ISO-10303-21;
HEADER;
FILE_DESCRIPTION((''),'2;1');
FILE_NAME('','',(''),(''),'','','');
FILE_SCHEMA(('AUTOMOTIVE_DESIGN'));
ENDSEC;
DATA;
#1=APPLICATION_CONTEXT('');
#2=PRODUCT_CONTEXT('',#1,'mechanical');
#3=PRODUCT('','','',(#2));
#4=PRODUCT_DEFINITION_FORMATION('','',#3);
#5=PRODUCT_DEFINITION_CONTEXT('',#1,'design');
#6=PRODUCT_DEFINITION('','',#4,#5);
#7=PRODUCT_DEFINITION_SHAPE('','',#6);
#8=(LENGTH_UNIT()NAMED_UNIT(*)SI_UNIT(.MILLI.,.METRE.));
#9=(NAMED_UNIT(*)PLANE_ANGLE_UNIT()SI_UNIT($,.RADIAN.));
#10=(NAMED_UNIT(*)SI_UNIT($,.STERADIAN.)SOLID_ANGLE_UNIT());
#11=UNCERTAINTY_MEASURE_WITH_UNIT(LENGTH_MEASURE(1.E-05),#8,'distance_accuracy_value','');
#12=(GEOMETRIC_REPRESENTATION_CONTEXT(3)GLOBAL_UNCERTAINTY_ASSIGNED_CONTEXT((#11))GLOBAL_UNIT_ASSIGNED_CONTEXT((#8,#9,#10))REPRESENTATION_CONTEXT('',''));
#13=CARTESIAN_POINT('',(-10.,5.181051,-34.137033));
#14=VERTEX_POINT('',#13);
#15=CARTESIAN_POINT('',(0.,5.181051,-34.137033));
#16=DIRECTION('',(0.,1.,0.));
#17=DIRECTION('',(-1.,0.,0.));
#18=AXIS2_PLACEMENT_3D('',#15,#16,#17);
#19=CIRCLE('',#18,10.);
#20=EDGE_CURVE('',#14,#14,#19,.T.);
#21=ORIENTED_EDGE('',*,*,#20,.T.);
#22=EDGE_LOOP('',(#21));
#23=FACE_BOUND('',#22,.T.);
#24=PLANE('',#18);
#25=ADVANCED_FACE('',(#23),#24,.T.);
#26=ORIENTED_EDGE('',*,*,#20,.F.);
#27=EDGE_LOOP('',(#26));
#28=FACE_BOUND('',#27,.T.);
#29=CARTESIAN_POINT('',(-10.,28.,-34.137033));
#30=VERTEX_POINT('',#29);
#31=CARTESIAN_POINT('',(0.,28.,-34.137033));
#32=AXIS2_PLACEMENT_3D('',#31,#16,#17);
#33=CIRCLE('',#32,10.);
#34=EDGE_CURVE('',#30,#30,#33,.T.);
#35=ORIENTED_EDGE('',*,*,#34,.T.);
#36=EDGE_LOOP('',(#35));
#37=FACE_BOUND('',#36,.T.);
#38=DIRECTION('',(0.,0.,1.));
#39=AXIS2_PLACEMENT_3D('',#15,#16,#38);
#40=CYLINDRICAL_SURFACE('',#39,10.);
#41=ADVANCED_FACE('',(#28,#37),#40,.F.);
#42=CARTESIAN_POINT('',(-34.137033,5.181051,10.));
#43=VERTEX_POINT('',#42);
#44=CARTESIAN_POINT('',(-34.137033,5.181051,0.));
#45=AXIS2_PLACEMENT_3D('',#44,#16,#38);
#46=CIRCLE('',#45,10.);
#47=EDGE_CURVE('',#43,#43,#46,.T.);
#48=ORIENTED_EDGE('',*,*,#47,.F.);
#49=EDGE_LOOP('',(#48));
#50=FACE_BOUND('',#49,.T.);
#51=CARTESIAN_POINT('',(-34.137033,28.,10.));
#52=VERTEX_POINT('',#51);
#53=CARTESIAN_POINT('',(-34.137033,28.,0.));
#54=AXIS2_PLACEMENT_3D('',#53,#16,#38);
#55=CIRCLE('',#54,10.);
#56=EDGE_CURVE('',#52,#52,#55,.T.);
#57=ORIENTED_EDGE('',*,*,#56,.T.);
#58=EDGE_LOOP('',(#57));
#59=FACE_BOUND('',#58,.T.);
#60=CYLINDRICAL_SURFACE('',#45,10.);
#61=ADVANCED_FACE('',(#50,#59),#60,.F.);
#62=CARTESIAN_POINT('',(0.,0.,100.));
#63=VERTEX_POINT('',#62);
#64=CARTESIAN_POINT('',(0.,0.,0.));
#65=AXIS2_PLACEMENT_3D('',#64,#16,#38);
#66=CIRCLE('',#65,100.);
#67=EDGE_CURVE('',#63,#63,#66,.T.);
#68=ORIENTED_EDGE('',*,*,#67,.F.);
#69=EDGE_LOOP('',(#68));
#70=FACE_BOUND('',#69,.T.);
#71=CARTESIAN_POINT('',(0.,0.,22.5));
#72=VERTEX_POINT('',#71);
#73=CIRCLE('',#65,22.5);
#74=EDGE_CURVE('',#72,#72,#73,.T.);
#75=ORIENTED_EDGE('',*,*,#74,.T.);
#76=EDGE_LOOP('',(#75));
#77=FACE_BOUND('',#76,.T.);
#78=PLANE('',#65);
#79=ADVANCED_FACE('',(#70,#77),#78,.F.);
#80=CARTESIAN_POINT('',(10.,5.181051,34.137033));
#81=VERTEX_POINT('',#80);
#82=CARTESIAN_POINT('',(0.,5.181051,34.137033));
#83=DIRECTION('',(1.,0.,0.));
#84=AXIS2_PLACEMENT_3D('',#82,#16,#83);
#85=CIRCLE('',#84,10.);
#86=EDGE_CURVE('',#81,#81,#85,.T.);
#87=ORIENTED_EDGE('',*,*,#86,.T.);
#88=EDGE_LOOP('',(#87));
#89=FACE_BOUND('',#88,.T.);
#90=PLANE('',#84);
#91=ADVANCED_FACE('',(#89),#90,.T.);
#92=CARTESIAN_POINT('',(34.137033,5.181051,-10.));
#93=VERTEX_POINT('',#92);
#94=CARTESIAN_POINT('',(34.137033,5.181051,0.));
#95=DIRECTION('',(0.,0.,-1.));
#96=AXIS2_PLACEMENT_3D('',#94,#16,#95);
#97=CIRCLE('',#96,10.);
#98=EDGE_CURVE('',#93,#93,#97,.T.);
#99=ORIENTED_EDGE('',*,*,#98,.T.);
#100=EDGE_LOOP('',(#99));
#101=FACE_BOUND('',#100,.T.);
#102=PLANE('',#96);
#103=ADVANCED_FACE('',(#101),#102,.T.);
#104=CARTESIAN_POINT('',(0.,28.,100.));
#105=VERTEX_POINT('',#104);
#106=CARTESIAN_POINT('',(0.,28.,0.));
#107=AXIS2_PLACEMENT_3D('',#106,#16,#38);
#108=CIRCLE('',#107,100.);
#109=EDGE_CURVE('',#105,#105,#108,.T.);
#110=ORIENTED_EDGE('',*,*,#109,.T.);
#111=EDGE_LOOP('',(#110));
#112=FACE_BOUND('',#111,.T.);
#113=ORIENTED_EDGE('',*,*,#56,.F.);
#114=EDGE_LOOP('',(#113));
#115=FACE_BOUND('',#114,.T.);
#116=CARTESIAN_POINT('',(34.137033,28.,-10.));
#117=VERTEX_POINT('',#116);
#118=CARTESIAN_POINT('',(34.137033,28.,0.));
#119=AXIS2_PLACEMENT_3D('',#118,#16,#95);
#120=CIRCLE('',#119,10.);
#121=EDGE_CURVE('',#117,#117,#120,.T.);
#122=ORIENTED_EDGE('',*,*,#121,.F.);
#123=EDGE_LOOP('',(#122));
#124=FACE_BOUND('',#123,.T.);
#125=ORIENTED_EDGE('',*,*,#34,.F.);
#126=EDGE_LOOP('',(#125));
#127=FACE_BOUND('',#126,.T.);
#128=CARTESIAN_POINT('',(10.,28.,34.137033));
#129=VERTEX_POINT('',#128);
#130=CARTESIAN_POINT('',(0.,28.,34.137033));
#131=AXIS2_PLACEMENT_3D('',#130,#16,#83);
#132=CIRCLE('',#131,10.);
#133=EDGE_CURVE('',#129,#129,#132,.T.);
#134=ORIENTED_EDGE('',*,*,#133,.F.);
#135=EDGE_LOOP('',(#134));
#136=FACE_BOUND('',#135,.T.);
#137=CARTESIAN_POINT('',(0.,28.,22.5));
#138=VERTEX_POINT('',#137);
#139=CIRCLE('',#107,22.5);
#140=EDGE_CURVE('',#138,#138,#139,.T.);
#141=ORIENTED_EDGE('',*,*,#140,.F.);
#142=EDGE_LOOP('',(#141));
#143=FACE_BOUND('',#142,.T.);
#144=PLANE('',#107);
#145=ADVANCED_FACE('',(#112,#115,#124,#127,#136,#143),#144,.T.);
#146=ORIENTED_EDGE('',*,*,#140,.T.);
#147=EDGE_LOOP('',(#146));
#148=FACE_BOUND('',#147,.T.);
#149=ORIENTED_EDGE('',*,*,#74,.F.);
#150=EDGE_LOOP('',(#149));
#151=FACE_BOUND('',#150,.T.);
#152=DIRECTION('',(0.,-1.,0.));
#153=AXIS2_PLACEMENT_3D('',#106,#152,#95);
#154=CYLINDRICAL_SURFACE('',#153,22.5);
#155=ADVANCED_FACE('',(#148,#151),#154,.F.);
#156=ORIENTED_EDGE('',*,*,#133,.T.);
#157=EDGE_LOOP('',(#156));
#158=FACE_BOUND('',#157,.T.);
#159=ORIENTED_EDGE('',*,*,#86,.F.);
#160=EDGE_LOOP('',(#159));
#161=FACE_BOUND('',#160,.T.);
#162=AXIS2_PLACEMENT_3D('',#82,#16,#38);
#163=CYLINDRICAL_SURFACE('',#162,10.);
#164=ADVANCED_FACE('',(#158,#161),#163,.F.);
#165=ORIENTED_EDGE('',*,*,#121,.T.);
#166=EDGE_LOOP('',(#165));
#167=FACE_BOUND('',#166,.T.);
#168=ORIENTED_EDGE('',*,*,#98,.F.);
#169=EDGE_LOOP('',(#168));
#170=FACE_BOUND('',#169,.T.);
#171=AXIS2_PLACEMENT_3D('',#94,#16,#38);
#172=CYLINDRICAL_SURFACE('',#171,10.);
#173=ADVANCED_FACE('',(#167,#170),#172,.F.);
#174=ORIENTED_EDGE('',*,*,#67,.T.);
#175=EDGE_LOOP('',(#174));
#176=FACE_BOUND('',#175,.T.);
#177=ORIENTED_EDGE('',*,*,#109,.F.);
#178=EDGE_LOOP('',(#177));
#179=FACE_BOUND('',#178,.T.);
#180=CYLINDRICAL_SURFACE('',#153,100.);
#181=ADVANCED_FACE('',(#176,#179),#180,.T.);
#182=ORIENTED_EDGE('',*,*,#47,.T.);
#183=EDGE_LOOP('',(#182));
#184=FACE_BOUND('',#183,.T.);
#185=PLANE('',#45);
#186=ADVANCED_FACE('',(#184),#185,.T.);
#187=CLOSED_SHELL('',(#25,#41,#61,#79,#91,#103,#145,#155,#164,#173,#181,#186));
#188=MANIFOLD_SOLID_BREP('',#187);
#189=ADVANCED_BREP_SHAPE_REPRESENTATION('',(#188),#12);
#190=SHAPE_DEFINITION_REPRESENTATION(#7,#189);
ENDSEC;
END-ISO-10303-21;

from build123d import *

# Parameters (mm, degrees)
SKETCH1_R           = 100
BOSS_EXTRUDE1_DEPTH = 28
SKETCH2_R           = 22.5
CUT_EXTRUDE1_DEPTH  = 145.166570328
SKETCH3_R           = 10
CUT_EXTRUDE2_DEPTH  = 22.818948915
CIRPATTERN1_COUNT   = 4


with BuildPart() as part:
    # Sketch1 → Boss-Extrude1 (new body)
    with BuildSketch(Plane(origin=(0, 0, 0), x_dir=(1, 0, 0), z_dir=(0, 1, 0))):
        Circle(SKETCH1_R)
    extrude(amount=BOSS_EXTRUDE1_DEPTH)

    # Sketch2 → Cut-Extrude1 (cut, through all)
    with BuildSketch(Plane(origin=(0, 0, 0), x_dir=(1, 0, 0), z_dir=(0, 1, 0))):
        Circle(SKETCH2_R)
    extrude(amount=CUT_EXTRUDE1_DEPTH, mode=Mode.SUBTRACT)

    # Sketch3 → Cut-Extrude2 (cut)
    with BuildSketch(Plane(origin=(0, 28, 0), x_dir=(1, 0, 0), z_dir=(0, 1, 0))):
        with Locations((-34.137032786, 0)):
            Circle(SKETCH3_R)
    cut_extrude2 = extrude(amount=-CUT_EXTRUDE2_DEPTH, mode=Mode.SUBTRACT)

    # CirPattern1: Cut-Extrude2 ×4 about axis
    cirpattern1_axis = Axis((0, 0, 0), (0, 1, 0))
    for i in range(1, CIRPATTERN1_COUNT):
        add(cut_extrude2.rotate(cirpattern1_axis, i * 360 / CIRPATTERN1_COUNT), mode=Mode.SUBTRACT)


solid = part.part
